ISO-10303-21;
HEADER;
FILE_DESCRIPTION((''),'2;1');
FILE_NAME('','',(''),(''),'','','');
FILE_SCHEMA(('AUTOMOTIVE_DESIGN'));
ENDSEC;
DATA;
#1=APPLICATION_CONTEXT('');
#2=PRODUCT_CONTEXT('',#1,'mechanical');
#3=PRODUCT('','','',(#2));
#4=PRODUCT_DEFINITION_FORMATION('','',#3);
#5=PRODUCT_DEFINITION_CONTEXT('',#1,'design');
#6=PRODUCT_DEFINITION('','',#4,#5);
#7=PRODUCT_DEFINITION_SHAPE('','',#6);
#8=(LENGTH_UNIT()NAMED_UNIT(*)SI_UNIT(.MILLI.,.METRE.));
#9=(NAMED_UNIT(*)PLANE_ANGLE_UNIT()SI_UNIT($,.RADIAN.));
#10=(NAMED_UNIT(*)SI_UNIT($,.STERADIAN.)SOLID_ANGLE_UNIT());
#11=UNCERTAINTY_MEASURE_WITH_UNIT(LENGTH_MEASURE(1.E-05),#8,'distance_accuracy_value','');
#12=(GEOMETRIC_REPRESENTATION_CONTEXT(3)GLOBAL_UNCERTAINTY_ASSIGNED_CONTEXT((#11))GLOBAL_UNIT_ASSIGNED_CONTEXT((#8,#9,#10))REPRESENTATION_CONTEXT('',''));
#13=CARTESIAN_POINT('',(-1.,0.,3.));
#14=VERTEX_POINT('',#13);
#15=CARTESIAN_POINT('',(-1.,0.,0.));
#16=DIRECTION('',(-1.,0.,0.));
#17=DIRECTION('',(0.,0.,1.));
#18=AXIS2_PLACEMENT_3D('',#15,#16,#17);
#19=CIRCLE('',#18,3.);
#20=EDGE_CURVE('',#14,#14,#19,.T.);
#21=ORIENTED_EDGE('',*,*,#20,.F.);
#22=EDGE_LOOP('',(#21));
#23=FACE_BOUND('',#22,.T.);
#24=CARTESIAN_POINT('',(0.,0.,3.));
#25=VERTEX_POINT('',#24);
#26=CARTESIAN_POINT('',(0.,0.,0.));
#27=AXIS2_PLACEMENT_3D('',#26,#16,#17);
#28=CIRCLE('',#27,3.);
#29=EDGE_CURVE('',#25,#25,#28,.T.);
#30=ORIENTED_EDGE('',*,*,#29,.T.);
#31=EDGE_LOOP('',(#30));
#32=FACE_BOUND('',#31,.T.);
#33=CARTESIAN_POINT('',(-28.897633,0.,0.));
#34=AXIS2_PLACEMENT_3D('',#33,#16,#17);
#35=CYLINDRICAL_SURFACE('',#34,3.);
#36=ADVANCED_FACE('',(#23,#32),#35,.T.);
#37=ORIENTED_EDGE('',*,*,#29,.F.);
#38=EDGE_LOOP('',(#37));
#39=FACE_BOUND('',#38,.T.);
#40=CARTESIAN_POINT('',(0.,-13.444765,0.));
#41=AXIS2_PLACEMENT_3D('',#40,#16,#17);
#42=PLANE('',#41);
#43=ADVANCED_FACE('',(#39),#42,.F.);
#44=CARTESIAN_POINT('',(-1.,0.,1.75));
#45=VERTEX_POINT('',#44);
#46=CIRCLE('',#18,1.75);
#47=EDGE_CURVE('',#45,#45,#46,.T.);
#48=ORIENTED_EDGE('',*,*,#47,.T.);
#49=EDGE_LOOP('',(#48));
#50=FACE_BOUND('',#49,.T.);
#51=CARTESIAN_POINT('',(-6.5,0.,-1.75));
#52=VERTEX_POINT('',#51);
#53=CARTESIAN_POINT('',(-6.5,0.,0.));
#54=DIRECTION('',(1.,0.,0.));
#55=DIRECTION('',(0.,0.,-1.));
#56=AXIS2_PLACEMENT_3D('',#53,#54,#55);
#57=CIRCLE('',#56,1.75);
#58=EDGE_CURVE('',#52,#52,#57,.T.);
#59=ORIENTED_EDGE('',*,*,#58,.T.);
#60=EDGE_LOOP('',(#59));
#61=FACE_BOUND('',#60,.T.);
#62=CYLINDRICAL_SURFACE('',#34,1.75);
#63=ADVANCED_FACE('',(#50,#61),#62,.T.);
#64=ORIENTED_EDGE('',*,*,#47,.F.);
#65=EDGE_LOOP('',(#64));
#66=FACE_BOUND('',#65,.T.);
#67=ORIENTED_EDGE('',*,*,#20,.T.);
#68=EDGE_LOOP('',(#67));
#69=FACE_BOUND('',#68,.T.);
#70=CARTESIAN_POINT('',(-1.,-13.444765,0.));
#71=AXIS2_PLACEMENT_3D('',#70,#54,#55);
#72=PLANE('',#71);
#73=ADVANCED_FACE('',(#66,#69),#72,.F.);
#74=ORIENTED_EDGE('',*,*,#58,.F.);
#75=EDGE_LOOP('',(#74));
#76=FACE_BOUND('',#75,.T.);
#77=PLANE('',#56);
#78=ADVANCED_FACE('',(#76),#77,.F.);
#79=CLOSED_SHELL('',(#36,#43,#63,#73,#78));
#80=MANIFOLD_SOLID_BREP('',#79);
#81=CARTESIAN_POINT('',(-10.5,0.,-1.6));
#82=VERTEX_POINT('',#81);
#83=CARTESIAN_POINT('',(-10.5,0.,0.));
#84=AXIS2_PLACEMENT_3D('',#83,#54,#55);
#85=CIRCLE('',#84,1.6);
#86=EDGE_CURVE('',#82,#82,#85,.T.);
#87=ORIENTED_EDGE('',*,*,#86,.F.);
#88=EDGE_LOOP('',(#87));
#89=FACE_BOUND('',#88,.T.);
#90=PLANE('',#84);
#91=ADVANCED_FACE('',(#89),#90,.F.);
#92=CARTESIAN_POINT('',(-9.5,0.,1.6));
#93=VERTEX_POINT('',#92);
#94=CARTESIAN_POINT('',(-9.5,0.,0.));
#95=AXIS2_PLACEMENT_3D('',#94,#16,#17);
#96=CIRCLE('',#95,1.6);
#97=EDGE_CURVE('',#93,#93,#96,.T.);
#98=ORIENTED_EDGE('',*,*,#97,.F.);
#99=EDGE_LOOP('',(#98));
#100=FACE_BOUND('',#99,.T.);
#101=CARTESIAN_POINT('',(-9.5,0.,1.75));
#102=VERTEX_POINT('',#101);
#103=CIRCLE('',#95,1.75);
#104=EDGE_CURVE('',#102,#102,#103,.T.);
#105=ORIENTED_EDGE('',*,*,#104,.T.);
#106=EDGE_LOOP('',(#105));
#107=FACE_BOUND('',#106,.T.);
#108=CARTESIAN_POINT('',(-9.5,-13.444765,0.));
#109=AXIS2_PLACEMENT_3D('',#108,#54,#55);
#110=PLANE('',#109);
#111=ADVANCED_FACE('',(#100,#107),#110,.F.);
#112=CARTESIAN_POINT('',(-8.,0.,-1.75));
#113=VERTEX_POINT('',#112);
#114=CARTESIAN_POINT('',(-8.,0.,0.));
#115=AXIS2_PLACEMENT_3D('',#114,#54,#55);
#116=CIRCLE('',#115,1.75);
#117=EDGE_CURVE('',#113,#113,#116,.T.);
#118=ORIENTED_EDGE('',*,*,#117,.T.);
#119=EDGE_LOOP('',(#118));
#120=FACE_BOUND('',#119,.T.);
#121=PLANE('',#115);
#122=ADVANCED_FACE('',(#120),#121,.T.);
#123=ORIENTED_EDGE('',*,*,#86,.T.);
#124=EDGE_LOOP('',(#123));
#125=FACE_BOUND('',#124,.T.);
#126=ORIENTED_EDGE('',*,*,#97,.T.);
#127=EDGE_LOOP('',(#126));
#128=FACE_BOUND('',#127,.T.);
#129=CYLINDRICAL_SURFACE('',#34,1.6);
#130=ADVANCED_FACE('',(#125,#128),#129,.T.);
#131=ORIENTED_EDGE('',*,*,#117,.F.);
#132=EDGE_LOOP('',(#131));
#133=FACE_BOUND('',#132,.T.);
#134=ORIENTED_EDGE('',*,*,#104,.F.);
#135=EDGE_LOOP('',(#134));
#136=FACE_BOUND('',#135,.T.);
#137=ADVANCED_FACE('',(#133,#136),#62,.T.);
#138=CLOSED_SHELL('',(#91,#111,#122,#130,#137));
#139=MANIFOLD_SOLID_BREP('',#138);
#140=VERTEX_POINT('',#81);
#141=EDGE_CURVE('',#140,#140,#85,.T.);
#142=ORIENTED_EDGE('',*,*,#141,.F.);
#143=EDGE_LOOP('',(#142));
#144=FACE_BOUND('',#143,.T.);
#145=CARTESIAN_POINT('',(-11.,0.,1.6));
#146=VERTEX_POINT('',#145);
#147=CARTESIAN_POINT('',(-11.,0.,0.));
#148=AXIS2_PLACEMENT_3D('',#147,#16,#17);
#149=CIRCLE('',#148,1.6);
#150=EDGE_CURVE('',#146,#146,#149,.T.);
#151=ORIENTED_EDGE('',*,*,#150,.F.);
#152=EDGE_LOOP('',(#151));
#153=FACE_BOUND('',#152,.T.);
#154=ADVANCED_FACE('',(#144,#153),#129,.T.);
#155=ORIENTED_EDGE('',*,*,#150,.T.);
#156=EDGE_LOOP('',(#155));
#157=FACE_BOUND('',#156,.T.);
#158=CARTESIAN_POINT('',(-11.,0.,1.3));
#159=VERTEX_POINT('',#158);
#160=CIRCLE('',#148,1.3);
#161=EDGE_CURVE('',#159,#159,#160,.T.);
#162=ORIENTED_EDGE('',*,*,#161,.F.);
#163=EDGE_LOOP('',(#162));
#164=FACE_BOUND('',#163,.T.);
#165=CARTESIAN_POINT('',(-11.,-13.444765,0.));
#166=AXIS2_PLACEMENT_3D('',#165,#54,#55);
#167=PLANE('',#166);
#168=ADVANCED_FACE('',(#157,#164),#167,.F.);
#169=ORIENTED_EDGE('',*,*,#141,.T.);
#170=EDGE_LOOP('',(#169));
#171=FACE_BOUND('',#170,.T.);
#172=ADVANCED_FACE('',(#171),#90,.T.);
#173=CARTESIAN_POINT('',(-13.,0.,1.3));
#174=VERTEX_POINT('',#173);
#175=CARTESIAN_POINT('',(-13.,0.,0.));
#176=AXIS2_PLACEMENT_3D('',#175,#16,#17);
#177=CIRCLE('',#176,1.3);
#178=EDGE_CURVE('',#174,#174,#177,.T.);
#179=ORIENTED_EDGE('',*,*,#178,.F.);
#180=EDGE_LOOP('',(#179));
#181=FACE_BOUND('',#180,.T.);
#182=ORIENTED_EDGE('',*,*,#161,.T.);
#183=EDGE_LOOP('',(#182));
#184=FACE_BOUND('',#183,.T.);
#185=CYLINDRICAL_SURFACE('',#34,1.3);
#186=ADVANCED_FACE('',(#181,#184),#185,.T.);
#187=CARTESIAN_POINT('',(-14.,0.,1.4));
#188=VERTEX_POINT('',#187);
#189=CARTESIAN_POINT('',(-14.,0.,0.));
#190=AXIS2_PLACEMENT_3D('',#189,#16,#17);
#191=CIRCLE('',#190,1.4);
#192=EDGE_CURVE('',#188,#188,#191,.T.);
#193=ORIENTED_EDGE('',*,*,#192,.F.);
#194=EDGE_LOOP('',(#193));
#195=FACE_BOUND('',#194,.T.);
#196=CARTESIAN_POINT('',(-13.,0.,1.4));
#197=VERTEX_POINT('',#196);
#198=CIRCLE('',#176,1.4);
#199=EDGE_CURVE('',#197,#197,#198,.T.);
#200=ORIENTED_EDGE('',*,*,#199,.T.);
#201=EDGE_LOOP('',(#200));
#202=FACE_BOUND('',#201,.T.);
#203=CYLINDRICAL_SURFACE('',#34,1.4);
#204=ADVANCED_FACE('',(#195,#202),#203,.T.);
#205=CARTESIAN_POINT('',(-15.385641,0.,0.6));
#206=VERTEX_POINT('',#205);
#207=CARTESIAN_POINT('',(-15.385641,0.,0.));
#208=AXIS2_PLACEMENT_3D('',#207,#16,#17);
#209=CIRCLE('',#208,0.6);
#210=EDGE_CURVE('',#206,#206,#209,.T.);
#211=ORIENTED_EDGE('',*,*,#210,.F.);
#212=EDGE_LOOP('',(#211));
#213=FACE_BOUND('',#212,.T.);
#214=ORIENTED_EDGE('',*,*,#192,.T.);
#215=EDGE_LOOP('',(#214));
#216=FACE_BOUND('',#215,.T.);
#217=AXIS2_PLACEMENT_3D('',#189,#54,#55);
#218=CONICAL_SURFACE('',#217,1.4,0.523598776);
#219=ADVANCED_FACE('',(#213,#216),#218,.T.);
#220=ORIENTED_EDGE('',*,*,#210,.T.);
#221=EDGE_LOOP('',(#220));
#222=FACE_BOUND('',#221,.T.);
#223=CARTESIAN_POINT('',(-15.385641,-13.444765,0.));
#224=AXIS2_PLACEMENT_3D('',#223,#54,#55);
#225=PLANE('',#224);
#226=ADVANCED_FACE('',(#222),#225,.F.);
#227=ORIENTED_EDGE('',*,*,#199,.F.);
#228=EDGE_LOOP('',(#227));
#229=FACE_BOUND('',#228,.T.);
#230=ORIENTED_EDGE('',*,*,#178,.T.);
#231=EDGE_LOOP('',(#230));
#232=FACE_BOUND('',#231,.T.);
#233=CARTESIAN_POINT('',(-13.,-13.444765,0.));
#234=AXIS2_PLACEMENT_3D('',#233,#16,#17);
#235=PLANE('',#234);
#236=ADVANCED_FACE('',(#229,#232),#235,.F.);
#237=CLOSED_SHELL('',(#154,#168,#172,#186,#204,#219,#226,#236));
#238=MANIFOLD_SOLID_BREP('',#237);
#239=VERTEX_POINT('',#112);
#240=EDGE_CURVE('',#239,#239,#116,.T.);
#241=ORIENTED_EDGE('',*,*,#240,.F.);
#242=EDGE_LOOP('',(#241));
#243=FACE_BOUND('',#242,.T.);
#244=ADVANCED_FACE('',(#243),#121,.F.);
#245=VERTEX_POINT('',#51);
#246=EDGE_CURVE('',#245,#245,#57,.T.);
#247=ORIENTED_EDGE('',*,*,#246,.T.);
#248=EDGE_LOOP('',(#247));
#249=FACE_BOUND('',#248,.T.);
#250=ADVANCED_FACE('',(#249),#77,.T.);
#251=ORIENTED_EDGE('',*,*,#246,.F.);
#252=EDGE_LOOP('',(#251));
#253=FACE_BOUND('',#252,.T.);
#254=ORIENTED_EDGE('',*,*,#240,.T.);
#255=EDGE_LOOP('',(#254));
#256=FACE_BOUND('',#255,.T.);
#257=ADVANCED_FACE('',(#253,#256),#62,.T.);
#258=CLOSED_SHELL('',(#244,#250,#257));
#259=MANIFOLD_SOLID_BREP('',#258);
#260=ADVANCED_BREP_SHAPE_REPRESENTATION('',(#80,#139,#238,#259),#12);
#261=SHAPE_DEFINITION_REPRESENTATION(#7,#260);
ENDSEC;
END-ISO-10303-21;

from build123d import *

# Parameters (mm, degrees)
FRACTIONNER1_START         = -10.5
FRACTIONNER1_OUTLINE_R     = 3
FRACTIONNER1_DEPTH         = 10.5
FRACTIONNER1_START_2       = -6.5
FRACTIONNER1_2_OUTLINE_R   = 1.75
FRACTIONNER1_2_DEPTH       = 6.5
FRACTIONNER1_START_3       = -1
FRACTIONNER1_3_OUTLINE_R   = 3
FRACTIONNER1_3_OUTLINE_R_2 = 1.75
FRACTIONNER1_3_DEPTH       = 1
FRACTIONNER1_START_4       = -8
FRACTIONNER1_4_OUTLINE_R   = 1.75
FRACTIONNER1_4_DEPTH       = 1.5
FRACTIONNER1_5_OUTLINE_R   = 1.6
FRACTIONNER1_5_DEPTH       = 2.5
FRACTIONNER1_START_5       = -9.5
FRACTIONNER1_6_OUTLINE_R   = 1.75
FRACTIONNER1_6_OUTLINE_R_2 = 1.6
FRACTIONNER1_6_DEPTH       = 1.5


# Read off the part's stored shape, not the designer's step: Fractionner1
with BuildPart() as part:
    # Esquisse1 → Révolution1 (revolve)
    with BuildSketch(Plane.XY, mode=Mode.PRIVATE) as r_volution1_sk:
        Polygon((-14, 1.4), (-15.385640646, 0.6), (-15.385640646, 0), (0, 0), (0, 3), (-1, 3), (-1, 1.75), (-9.5, 1.75), (-9.5, 1.6), (-11, 1.6), (-11, 1.3), (-13, 1.3), (-13, 1.4), align=None)
    revolve(r_volution1_sk.sketch.rotate(Axis((-28.897633393, 0, 0), (1, 0, 0)), 90), axis=Axis((-28.897633393, 0, 0), (1, 0, 0)))

    # Fractionner1 outline → Fractionner1 (cut)
    with BuildSketch(Plane.YZ.offset(FRACTIONNER1_START)):
        Circle(FRACTIONNER1_OUTLINE_R)
    extrude(amount=FRACTIONNER1_DEPTH, mode=Mode.SUBTRACT)


with BuildPart() as body_2:
    # Fractionner1 2 outline → Fractionner1 2 (new body)
    with BuildSketch(Plane.YZ.offset(FRACTIONNER1_START_2)):
        Circle(FRACTIONNER1_2_OUTLINE_R)
    extrude(amount=FRACTIONNER1_2_DEPTH)

    # Fractionner1 3 outline → Fractionner1 3 (add)
    with BuildSketch(Plane.YZ.offset(FRACTIONNER1_START_3)):
        Circle(FRACTIONNER1_3_OUTLINE_R)
        Circle(FRACTIONNER1_3_OUTLINE_R_2, mode=Mode.SUBTRACT)
    extrude(amount=FRACTIONNER1_3_DEPTH)


with BuildPart() as body_3:
    # Fractionner1 4 outline → Fractionner1 4 (new body)
    with BuildSketch(Plane.YZ.offset(FRACTIONNER1_START_4)):
        Circle(FRACTIONNER1_4_OUTLINE_R)
    extrude(amount=FRACTIONNER1_4_DEPTH)


with BuildPart() as body_4:
    # Fractionner1 5 outline → Fractionner1 5 (new body)
    with BuildSketch(Plane.YZ.offset(FRACTIONNER1_START)):
        Circle(FRACTIONNER1_5_OUTLINE_R)
    extrude(amount=FRACTIONNER1_5_DEPTH)

    # Fractionner1 6 outline → Fractionner1 6 (add)
    with BuildSketch(Plane.YZ.offset(FRACTIONNER1_START_5)):
        Circle(FRACTIONNER1_6_OUTLINE_R)
        Circle(FRACTIONNER1_6_OUTLINE_R_2, mode=Mode.SUBTRACT)
    extrude(amount=FRACTIONNER1_6_DEPTH)


solid = Compound([part.part, body_2.part, body_3.part, body_4.part])
